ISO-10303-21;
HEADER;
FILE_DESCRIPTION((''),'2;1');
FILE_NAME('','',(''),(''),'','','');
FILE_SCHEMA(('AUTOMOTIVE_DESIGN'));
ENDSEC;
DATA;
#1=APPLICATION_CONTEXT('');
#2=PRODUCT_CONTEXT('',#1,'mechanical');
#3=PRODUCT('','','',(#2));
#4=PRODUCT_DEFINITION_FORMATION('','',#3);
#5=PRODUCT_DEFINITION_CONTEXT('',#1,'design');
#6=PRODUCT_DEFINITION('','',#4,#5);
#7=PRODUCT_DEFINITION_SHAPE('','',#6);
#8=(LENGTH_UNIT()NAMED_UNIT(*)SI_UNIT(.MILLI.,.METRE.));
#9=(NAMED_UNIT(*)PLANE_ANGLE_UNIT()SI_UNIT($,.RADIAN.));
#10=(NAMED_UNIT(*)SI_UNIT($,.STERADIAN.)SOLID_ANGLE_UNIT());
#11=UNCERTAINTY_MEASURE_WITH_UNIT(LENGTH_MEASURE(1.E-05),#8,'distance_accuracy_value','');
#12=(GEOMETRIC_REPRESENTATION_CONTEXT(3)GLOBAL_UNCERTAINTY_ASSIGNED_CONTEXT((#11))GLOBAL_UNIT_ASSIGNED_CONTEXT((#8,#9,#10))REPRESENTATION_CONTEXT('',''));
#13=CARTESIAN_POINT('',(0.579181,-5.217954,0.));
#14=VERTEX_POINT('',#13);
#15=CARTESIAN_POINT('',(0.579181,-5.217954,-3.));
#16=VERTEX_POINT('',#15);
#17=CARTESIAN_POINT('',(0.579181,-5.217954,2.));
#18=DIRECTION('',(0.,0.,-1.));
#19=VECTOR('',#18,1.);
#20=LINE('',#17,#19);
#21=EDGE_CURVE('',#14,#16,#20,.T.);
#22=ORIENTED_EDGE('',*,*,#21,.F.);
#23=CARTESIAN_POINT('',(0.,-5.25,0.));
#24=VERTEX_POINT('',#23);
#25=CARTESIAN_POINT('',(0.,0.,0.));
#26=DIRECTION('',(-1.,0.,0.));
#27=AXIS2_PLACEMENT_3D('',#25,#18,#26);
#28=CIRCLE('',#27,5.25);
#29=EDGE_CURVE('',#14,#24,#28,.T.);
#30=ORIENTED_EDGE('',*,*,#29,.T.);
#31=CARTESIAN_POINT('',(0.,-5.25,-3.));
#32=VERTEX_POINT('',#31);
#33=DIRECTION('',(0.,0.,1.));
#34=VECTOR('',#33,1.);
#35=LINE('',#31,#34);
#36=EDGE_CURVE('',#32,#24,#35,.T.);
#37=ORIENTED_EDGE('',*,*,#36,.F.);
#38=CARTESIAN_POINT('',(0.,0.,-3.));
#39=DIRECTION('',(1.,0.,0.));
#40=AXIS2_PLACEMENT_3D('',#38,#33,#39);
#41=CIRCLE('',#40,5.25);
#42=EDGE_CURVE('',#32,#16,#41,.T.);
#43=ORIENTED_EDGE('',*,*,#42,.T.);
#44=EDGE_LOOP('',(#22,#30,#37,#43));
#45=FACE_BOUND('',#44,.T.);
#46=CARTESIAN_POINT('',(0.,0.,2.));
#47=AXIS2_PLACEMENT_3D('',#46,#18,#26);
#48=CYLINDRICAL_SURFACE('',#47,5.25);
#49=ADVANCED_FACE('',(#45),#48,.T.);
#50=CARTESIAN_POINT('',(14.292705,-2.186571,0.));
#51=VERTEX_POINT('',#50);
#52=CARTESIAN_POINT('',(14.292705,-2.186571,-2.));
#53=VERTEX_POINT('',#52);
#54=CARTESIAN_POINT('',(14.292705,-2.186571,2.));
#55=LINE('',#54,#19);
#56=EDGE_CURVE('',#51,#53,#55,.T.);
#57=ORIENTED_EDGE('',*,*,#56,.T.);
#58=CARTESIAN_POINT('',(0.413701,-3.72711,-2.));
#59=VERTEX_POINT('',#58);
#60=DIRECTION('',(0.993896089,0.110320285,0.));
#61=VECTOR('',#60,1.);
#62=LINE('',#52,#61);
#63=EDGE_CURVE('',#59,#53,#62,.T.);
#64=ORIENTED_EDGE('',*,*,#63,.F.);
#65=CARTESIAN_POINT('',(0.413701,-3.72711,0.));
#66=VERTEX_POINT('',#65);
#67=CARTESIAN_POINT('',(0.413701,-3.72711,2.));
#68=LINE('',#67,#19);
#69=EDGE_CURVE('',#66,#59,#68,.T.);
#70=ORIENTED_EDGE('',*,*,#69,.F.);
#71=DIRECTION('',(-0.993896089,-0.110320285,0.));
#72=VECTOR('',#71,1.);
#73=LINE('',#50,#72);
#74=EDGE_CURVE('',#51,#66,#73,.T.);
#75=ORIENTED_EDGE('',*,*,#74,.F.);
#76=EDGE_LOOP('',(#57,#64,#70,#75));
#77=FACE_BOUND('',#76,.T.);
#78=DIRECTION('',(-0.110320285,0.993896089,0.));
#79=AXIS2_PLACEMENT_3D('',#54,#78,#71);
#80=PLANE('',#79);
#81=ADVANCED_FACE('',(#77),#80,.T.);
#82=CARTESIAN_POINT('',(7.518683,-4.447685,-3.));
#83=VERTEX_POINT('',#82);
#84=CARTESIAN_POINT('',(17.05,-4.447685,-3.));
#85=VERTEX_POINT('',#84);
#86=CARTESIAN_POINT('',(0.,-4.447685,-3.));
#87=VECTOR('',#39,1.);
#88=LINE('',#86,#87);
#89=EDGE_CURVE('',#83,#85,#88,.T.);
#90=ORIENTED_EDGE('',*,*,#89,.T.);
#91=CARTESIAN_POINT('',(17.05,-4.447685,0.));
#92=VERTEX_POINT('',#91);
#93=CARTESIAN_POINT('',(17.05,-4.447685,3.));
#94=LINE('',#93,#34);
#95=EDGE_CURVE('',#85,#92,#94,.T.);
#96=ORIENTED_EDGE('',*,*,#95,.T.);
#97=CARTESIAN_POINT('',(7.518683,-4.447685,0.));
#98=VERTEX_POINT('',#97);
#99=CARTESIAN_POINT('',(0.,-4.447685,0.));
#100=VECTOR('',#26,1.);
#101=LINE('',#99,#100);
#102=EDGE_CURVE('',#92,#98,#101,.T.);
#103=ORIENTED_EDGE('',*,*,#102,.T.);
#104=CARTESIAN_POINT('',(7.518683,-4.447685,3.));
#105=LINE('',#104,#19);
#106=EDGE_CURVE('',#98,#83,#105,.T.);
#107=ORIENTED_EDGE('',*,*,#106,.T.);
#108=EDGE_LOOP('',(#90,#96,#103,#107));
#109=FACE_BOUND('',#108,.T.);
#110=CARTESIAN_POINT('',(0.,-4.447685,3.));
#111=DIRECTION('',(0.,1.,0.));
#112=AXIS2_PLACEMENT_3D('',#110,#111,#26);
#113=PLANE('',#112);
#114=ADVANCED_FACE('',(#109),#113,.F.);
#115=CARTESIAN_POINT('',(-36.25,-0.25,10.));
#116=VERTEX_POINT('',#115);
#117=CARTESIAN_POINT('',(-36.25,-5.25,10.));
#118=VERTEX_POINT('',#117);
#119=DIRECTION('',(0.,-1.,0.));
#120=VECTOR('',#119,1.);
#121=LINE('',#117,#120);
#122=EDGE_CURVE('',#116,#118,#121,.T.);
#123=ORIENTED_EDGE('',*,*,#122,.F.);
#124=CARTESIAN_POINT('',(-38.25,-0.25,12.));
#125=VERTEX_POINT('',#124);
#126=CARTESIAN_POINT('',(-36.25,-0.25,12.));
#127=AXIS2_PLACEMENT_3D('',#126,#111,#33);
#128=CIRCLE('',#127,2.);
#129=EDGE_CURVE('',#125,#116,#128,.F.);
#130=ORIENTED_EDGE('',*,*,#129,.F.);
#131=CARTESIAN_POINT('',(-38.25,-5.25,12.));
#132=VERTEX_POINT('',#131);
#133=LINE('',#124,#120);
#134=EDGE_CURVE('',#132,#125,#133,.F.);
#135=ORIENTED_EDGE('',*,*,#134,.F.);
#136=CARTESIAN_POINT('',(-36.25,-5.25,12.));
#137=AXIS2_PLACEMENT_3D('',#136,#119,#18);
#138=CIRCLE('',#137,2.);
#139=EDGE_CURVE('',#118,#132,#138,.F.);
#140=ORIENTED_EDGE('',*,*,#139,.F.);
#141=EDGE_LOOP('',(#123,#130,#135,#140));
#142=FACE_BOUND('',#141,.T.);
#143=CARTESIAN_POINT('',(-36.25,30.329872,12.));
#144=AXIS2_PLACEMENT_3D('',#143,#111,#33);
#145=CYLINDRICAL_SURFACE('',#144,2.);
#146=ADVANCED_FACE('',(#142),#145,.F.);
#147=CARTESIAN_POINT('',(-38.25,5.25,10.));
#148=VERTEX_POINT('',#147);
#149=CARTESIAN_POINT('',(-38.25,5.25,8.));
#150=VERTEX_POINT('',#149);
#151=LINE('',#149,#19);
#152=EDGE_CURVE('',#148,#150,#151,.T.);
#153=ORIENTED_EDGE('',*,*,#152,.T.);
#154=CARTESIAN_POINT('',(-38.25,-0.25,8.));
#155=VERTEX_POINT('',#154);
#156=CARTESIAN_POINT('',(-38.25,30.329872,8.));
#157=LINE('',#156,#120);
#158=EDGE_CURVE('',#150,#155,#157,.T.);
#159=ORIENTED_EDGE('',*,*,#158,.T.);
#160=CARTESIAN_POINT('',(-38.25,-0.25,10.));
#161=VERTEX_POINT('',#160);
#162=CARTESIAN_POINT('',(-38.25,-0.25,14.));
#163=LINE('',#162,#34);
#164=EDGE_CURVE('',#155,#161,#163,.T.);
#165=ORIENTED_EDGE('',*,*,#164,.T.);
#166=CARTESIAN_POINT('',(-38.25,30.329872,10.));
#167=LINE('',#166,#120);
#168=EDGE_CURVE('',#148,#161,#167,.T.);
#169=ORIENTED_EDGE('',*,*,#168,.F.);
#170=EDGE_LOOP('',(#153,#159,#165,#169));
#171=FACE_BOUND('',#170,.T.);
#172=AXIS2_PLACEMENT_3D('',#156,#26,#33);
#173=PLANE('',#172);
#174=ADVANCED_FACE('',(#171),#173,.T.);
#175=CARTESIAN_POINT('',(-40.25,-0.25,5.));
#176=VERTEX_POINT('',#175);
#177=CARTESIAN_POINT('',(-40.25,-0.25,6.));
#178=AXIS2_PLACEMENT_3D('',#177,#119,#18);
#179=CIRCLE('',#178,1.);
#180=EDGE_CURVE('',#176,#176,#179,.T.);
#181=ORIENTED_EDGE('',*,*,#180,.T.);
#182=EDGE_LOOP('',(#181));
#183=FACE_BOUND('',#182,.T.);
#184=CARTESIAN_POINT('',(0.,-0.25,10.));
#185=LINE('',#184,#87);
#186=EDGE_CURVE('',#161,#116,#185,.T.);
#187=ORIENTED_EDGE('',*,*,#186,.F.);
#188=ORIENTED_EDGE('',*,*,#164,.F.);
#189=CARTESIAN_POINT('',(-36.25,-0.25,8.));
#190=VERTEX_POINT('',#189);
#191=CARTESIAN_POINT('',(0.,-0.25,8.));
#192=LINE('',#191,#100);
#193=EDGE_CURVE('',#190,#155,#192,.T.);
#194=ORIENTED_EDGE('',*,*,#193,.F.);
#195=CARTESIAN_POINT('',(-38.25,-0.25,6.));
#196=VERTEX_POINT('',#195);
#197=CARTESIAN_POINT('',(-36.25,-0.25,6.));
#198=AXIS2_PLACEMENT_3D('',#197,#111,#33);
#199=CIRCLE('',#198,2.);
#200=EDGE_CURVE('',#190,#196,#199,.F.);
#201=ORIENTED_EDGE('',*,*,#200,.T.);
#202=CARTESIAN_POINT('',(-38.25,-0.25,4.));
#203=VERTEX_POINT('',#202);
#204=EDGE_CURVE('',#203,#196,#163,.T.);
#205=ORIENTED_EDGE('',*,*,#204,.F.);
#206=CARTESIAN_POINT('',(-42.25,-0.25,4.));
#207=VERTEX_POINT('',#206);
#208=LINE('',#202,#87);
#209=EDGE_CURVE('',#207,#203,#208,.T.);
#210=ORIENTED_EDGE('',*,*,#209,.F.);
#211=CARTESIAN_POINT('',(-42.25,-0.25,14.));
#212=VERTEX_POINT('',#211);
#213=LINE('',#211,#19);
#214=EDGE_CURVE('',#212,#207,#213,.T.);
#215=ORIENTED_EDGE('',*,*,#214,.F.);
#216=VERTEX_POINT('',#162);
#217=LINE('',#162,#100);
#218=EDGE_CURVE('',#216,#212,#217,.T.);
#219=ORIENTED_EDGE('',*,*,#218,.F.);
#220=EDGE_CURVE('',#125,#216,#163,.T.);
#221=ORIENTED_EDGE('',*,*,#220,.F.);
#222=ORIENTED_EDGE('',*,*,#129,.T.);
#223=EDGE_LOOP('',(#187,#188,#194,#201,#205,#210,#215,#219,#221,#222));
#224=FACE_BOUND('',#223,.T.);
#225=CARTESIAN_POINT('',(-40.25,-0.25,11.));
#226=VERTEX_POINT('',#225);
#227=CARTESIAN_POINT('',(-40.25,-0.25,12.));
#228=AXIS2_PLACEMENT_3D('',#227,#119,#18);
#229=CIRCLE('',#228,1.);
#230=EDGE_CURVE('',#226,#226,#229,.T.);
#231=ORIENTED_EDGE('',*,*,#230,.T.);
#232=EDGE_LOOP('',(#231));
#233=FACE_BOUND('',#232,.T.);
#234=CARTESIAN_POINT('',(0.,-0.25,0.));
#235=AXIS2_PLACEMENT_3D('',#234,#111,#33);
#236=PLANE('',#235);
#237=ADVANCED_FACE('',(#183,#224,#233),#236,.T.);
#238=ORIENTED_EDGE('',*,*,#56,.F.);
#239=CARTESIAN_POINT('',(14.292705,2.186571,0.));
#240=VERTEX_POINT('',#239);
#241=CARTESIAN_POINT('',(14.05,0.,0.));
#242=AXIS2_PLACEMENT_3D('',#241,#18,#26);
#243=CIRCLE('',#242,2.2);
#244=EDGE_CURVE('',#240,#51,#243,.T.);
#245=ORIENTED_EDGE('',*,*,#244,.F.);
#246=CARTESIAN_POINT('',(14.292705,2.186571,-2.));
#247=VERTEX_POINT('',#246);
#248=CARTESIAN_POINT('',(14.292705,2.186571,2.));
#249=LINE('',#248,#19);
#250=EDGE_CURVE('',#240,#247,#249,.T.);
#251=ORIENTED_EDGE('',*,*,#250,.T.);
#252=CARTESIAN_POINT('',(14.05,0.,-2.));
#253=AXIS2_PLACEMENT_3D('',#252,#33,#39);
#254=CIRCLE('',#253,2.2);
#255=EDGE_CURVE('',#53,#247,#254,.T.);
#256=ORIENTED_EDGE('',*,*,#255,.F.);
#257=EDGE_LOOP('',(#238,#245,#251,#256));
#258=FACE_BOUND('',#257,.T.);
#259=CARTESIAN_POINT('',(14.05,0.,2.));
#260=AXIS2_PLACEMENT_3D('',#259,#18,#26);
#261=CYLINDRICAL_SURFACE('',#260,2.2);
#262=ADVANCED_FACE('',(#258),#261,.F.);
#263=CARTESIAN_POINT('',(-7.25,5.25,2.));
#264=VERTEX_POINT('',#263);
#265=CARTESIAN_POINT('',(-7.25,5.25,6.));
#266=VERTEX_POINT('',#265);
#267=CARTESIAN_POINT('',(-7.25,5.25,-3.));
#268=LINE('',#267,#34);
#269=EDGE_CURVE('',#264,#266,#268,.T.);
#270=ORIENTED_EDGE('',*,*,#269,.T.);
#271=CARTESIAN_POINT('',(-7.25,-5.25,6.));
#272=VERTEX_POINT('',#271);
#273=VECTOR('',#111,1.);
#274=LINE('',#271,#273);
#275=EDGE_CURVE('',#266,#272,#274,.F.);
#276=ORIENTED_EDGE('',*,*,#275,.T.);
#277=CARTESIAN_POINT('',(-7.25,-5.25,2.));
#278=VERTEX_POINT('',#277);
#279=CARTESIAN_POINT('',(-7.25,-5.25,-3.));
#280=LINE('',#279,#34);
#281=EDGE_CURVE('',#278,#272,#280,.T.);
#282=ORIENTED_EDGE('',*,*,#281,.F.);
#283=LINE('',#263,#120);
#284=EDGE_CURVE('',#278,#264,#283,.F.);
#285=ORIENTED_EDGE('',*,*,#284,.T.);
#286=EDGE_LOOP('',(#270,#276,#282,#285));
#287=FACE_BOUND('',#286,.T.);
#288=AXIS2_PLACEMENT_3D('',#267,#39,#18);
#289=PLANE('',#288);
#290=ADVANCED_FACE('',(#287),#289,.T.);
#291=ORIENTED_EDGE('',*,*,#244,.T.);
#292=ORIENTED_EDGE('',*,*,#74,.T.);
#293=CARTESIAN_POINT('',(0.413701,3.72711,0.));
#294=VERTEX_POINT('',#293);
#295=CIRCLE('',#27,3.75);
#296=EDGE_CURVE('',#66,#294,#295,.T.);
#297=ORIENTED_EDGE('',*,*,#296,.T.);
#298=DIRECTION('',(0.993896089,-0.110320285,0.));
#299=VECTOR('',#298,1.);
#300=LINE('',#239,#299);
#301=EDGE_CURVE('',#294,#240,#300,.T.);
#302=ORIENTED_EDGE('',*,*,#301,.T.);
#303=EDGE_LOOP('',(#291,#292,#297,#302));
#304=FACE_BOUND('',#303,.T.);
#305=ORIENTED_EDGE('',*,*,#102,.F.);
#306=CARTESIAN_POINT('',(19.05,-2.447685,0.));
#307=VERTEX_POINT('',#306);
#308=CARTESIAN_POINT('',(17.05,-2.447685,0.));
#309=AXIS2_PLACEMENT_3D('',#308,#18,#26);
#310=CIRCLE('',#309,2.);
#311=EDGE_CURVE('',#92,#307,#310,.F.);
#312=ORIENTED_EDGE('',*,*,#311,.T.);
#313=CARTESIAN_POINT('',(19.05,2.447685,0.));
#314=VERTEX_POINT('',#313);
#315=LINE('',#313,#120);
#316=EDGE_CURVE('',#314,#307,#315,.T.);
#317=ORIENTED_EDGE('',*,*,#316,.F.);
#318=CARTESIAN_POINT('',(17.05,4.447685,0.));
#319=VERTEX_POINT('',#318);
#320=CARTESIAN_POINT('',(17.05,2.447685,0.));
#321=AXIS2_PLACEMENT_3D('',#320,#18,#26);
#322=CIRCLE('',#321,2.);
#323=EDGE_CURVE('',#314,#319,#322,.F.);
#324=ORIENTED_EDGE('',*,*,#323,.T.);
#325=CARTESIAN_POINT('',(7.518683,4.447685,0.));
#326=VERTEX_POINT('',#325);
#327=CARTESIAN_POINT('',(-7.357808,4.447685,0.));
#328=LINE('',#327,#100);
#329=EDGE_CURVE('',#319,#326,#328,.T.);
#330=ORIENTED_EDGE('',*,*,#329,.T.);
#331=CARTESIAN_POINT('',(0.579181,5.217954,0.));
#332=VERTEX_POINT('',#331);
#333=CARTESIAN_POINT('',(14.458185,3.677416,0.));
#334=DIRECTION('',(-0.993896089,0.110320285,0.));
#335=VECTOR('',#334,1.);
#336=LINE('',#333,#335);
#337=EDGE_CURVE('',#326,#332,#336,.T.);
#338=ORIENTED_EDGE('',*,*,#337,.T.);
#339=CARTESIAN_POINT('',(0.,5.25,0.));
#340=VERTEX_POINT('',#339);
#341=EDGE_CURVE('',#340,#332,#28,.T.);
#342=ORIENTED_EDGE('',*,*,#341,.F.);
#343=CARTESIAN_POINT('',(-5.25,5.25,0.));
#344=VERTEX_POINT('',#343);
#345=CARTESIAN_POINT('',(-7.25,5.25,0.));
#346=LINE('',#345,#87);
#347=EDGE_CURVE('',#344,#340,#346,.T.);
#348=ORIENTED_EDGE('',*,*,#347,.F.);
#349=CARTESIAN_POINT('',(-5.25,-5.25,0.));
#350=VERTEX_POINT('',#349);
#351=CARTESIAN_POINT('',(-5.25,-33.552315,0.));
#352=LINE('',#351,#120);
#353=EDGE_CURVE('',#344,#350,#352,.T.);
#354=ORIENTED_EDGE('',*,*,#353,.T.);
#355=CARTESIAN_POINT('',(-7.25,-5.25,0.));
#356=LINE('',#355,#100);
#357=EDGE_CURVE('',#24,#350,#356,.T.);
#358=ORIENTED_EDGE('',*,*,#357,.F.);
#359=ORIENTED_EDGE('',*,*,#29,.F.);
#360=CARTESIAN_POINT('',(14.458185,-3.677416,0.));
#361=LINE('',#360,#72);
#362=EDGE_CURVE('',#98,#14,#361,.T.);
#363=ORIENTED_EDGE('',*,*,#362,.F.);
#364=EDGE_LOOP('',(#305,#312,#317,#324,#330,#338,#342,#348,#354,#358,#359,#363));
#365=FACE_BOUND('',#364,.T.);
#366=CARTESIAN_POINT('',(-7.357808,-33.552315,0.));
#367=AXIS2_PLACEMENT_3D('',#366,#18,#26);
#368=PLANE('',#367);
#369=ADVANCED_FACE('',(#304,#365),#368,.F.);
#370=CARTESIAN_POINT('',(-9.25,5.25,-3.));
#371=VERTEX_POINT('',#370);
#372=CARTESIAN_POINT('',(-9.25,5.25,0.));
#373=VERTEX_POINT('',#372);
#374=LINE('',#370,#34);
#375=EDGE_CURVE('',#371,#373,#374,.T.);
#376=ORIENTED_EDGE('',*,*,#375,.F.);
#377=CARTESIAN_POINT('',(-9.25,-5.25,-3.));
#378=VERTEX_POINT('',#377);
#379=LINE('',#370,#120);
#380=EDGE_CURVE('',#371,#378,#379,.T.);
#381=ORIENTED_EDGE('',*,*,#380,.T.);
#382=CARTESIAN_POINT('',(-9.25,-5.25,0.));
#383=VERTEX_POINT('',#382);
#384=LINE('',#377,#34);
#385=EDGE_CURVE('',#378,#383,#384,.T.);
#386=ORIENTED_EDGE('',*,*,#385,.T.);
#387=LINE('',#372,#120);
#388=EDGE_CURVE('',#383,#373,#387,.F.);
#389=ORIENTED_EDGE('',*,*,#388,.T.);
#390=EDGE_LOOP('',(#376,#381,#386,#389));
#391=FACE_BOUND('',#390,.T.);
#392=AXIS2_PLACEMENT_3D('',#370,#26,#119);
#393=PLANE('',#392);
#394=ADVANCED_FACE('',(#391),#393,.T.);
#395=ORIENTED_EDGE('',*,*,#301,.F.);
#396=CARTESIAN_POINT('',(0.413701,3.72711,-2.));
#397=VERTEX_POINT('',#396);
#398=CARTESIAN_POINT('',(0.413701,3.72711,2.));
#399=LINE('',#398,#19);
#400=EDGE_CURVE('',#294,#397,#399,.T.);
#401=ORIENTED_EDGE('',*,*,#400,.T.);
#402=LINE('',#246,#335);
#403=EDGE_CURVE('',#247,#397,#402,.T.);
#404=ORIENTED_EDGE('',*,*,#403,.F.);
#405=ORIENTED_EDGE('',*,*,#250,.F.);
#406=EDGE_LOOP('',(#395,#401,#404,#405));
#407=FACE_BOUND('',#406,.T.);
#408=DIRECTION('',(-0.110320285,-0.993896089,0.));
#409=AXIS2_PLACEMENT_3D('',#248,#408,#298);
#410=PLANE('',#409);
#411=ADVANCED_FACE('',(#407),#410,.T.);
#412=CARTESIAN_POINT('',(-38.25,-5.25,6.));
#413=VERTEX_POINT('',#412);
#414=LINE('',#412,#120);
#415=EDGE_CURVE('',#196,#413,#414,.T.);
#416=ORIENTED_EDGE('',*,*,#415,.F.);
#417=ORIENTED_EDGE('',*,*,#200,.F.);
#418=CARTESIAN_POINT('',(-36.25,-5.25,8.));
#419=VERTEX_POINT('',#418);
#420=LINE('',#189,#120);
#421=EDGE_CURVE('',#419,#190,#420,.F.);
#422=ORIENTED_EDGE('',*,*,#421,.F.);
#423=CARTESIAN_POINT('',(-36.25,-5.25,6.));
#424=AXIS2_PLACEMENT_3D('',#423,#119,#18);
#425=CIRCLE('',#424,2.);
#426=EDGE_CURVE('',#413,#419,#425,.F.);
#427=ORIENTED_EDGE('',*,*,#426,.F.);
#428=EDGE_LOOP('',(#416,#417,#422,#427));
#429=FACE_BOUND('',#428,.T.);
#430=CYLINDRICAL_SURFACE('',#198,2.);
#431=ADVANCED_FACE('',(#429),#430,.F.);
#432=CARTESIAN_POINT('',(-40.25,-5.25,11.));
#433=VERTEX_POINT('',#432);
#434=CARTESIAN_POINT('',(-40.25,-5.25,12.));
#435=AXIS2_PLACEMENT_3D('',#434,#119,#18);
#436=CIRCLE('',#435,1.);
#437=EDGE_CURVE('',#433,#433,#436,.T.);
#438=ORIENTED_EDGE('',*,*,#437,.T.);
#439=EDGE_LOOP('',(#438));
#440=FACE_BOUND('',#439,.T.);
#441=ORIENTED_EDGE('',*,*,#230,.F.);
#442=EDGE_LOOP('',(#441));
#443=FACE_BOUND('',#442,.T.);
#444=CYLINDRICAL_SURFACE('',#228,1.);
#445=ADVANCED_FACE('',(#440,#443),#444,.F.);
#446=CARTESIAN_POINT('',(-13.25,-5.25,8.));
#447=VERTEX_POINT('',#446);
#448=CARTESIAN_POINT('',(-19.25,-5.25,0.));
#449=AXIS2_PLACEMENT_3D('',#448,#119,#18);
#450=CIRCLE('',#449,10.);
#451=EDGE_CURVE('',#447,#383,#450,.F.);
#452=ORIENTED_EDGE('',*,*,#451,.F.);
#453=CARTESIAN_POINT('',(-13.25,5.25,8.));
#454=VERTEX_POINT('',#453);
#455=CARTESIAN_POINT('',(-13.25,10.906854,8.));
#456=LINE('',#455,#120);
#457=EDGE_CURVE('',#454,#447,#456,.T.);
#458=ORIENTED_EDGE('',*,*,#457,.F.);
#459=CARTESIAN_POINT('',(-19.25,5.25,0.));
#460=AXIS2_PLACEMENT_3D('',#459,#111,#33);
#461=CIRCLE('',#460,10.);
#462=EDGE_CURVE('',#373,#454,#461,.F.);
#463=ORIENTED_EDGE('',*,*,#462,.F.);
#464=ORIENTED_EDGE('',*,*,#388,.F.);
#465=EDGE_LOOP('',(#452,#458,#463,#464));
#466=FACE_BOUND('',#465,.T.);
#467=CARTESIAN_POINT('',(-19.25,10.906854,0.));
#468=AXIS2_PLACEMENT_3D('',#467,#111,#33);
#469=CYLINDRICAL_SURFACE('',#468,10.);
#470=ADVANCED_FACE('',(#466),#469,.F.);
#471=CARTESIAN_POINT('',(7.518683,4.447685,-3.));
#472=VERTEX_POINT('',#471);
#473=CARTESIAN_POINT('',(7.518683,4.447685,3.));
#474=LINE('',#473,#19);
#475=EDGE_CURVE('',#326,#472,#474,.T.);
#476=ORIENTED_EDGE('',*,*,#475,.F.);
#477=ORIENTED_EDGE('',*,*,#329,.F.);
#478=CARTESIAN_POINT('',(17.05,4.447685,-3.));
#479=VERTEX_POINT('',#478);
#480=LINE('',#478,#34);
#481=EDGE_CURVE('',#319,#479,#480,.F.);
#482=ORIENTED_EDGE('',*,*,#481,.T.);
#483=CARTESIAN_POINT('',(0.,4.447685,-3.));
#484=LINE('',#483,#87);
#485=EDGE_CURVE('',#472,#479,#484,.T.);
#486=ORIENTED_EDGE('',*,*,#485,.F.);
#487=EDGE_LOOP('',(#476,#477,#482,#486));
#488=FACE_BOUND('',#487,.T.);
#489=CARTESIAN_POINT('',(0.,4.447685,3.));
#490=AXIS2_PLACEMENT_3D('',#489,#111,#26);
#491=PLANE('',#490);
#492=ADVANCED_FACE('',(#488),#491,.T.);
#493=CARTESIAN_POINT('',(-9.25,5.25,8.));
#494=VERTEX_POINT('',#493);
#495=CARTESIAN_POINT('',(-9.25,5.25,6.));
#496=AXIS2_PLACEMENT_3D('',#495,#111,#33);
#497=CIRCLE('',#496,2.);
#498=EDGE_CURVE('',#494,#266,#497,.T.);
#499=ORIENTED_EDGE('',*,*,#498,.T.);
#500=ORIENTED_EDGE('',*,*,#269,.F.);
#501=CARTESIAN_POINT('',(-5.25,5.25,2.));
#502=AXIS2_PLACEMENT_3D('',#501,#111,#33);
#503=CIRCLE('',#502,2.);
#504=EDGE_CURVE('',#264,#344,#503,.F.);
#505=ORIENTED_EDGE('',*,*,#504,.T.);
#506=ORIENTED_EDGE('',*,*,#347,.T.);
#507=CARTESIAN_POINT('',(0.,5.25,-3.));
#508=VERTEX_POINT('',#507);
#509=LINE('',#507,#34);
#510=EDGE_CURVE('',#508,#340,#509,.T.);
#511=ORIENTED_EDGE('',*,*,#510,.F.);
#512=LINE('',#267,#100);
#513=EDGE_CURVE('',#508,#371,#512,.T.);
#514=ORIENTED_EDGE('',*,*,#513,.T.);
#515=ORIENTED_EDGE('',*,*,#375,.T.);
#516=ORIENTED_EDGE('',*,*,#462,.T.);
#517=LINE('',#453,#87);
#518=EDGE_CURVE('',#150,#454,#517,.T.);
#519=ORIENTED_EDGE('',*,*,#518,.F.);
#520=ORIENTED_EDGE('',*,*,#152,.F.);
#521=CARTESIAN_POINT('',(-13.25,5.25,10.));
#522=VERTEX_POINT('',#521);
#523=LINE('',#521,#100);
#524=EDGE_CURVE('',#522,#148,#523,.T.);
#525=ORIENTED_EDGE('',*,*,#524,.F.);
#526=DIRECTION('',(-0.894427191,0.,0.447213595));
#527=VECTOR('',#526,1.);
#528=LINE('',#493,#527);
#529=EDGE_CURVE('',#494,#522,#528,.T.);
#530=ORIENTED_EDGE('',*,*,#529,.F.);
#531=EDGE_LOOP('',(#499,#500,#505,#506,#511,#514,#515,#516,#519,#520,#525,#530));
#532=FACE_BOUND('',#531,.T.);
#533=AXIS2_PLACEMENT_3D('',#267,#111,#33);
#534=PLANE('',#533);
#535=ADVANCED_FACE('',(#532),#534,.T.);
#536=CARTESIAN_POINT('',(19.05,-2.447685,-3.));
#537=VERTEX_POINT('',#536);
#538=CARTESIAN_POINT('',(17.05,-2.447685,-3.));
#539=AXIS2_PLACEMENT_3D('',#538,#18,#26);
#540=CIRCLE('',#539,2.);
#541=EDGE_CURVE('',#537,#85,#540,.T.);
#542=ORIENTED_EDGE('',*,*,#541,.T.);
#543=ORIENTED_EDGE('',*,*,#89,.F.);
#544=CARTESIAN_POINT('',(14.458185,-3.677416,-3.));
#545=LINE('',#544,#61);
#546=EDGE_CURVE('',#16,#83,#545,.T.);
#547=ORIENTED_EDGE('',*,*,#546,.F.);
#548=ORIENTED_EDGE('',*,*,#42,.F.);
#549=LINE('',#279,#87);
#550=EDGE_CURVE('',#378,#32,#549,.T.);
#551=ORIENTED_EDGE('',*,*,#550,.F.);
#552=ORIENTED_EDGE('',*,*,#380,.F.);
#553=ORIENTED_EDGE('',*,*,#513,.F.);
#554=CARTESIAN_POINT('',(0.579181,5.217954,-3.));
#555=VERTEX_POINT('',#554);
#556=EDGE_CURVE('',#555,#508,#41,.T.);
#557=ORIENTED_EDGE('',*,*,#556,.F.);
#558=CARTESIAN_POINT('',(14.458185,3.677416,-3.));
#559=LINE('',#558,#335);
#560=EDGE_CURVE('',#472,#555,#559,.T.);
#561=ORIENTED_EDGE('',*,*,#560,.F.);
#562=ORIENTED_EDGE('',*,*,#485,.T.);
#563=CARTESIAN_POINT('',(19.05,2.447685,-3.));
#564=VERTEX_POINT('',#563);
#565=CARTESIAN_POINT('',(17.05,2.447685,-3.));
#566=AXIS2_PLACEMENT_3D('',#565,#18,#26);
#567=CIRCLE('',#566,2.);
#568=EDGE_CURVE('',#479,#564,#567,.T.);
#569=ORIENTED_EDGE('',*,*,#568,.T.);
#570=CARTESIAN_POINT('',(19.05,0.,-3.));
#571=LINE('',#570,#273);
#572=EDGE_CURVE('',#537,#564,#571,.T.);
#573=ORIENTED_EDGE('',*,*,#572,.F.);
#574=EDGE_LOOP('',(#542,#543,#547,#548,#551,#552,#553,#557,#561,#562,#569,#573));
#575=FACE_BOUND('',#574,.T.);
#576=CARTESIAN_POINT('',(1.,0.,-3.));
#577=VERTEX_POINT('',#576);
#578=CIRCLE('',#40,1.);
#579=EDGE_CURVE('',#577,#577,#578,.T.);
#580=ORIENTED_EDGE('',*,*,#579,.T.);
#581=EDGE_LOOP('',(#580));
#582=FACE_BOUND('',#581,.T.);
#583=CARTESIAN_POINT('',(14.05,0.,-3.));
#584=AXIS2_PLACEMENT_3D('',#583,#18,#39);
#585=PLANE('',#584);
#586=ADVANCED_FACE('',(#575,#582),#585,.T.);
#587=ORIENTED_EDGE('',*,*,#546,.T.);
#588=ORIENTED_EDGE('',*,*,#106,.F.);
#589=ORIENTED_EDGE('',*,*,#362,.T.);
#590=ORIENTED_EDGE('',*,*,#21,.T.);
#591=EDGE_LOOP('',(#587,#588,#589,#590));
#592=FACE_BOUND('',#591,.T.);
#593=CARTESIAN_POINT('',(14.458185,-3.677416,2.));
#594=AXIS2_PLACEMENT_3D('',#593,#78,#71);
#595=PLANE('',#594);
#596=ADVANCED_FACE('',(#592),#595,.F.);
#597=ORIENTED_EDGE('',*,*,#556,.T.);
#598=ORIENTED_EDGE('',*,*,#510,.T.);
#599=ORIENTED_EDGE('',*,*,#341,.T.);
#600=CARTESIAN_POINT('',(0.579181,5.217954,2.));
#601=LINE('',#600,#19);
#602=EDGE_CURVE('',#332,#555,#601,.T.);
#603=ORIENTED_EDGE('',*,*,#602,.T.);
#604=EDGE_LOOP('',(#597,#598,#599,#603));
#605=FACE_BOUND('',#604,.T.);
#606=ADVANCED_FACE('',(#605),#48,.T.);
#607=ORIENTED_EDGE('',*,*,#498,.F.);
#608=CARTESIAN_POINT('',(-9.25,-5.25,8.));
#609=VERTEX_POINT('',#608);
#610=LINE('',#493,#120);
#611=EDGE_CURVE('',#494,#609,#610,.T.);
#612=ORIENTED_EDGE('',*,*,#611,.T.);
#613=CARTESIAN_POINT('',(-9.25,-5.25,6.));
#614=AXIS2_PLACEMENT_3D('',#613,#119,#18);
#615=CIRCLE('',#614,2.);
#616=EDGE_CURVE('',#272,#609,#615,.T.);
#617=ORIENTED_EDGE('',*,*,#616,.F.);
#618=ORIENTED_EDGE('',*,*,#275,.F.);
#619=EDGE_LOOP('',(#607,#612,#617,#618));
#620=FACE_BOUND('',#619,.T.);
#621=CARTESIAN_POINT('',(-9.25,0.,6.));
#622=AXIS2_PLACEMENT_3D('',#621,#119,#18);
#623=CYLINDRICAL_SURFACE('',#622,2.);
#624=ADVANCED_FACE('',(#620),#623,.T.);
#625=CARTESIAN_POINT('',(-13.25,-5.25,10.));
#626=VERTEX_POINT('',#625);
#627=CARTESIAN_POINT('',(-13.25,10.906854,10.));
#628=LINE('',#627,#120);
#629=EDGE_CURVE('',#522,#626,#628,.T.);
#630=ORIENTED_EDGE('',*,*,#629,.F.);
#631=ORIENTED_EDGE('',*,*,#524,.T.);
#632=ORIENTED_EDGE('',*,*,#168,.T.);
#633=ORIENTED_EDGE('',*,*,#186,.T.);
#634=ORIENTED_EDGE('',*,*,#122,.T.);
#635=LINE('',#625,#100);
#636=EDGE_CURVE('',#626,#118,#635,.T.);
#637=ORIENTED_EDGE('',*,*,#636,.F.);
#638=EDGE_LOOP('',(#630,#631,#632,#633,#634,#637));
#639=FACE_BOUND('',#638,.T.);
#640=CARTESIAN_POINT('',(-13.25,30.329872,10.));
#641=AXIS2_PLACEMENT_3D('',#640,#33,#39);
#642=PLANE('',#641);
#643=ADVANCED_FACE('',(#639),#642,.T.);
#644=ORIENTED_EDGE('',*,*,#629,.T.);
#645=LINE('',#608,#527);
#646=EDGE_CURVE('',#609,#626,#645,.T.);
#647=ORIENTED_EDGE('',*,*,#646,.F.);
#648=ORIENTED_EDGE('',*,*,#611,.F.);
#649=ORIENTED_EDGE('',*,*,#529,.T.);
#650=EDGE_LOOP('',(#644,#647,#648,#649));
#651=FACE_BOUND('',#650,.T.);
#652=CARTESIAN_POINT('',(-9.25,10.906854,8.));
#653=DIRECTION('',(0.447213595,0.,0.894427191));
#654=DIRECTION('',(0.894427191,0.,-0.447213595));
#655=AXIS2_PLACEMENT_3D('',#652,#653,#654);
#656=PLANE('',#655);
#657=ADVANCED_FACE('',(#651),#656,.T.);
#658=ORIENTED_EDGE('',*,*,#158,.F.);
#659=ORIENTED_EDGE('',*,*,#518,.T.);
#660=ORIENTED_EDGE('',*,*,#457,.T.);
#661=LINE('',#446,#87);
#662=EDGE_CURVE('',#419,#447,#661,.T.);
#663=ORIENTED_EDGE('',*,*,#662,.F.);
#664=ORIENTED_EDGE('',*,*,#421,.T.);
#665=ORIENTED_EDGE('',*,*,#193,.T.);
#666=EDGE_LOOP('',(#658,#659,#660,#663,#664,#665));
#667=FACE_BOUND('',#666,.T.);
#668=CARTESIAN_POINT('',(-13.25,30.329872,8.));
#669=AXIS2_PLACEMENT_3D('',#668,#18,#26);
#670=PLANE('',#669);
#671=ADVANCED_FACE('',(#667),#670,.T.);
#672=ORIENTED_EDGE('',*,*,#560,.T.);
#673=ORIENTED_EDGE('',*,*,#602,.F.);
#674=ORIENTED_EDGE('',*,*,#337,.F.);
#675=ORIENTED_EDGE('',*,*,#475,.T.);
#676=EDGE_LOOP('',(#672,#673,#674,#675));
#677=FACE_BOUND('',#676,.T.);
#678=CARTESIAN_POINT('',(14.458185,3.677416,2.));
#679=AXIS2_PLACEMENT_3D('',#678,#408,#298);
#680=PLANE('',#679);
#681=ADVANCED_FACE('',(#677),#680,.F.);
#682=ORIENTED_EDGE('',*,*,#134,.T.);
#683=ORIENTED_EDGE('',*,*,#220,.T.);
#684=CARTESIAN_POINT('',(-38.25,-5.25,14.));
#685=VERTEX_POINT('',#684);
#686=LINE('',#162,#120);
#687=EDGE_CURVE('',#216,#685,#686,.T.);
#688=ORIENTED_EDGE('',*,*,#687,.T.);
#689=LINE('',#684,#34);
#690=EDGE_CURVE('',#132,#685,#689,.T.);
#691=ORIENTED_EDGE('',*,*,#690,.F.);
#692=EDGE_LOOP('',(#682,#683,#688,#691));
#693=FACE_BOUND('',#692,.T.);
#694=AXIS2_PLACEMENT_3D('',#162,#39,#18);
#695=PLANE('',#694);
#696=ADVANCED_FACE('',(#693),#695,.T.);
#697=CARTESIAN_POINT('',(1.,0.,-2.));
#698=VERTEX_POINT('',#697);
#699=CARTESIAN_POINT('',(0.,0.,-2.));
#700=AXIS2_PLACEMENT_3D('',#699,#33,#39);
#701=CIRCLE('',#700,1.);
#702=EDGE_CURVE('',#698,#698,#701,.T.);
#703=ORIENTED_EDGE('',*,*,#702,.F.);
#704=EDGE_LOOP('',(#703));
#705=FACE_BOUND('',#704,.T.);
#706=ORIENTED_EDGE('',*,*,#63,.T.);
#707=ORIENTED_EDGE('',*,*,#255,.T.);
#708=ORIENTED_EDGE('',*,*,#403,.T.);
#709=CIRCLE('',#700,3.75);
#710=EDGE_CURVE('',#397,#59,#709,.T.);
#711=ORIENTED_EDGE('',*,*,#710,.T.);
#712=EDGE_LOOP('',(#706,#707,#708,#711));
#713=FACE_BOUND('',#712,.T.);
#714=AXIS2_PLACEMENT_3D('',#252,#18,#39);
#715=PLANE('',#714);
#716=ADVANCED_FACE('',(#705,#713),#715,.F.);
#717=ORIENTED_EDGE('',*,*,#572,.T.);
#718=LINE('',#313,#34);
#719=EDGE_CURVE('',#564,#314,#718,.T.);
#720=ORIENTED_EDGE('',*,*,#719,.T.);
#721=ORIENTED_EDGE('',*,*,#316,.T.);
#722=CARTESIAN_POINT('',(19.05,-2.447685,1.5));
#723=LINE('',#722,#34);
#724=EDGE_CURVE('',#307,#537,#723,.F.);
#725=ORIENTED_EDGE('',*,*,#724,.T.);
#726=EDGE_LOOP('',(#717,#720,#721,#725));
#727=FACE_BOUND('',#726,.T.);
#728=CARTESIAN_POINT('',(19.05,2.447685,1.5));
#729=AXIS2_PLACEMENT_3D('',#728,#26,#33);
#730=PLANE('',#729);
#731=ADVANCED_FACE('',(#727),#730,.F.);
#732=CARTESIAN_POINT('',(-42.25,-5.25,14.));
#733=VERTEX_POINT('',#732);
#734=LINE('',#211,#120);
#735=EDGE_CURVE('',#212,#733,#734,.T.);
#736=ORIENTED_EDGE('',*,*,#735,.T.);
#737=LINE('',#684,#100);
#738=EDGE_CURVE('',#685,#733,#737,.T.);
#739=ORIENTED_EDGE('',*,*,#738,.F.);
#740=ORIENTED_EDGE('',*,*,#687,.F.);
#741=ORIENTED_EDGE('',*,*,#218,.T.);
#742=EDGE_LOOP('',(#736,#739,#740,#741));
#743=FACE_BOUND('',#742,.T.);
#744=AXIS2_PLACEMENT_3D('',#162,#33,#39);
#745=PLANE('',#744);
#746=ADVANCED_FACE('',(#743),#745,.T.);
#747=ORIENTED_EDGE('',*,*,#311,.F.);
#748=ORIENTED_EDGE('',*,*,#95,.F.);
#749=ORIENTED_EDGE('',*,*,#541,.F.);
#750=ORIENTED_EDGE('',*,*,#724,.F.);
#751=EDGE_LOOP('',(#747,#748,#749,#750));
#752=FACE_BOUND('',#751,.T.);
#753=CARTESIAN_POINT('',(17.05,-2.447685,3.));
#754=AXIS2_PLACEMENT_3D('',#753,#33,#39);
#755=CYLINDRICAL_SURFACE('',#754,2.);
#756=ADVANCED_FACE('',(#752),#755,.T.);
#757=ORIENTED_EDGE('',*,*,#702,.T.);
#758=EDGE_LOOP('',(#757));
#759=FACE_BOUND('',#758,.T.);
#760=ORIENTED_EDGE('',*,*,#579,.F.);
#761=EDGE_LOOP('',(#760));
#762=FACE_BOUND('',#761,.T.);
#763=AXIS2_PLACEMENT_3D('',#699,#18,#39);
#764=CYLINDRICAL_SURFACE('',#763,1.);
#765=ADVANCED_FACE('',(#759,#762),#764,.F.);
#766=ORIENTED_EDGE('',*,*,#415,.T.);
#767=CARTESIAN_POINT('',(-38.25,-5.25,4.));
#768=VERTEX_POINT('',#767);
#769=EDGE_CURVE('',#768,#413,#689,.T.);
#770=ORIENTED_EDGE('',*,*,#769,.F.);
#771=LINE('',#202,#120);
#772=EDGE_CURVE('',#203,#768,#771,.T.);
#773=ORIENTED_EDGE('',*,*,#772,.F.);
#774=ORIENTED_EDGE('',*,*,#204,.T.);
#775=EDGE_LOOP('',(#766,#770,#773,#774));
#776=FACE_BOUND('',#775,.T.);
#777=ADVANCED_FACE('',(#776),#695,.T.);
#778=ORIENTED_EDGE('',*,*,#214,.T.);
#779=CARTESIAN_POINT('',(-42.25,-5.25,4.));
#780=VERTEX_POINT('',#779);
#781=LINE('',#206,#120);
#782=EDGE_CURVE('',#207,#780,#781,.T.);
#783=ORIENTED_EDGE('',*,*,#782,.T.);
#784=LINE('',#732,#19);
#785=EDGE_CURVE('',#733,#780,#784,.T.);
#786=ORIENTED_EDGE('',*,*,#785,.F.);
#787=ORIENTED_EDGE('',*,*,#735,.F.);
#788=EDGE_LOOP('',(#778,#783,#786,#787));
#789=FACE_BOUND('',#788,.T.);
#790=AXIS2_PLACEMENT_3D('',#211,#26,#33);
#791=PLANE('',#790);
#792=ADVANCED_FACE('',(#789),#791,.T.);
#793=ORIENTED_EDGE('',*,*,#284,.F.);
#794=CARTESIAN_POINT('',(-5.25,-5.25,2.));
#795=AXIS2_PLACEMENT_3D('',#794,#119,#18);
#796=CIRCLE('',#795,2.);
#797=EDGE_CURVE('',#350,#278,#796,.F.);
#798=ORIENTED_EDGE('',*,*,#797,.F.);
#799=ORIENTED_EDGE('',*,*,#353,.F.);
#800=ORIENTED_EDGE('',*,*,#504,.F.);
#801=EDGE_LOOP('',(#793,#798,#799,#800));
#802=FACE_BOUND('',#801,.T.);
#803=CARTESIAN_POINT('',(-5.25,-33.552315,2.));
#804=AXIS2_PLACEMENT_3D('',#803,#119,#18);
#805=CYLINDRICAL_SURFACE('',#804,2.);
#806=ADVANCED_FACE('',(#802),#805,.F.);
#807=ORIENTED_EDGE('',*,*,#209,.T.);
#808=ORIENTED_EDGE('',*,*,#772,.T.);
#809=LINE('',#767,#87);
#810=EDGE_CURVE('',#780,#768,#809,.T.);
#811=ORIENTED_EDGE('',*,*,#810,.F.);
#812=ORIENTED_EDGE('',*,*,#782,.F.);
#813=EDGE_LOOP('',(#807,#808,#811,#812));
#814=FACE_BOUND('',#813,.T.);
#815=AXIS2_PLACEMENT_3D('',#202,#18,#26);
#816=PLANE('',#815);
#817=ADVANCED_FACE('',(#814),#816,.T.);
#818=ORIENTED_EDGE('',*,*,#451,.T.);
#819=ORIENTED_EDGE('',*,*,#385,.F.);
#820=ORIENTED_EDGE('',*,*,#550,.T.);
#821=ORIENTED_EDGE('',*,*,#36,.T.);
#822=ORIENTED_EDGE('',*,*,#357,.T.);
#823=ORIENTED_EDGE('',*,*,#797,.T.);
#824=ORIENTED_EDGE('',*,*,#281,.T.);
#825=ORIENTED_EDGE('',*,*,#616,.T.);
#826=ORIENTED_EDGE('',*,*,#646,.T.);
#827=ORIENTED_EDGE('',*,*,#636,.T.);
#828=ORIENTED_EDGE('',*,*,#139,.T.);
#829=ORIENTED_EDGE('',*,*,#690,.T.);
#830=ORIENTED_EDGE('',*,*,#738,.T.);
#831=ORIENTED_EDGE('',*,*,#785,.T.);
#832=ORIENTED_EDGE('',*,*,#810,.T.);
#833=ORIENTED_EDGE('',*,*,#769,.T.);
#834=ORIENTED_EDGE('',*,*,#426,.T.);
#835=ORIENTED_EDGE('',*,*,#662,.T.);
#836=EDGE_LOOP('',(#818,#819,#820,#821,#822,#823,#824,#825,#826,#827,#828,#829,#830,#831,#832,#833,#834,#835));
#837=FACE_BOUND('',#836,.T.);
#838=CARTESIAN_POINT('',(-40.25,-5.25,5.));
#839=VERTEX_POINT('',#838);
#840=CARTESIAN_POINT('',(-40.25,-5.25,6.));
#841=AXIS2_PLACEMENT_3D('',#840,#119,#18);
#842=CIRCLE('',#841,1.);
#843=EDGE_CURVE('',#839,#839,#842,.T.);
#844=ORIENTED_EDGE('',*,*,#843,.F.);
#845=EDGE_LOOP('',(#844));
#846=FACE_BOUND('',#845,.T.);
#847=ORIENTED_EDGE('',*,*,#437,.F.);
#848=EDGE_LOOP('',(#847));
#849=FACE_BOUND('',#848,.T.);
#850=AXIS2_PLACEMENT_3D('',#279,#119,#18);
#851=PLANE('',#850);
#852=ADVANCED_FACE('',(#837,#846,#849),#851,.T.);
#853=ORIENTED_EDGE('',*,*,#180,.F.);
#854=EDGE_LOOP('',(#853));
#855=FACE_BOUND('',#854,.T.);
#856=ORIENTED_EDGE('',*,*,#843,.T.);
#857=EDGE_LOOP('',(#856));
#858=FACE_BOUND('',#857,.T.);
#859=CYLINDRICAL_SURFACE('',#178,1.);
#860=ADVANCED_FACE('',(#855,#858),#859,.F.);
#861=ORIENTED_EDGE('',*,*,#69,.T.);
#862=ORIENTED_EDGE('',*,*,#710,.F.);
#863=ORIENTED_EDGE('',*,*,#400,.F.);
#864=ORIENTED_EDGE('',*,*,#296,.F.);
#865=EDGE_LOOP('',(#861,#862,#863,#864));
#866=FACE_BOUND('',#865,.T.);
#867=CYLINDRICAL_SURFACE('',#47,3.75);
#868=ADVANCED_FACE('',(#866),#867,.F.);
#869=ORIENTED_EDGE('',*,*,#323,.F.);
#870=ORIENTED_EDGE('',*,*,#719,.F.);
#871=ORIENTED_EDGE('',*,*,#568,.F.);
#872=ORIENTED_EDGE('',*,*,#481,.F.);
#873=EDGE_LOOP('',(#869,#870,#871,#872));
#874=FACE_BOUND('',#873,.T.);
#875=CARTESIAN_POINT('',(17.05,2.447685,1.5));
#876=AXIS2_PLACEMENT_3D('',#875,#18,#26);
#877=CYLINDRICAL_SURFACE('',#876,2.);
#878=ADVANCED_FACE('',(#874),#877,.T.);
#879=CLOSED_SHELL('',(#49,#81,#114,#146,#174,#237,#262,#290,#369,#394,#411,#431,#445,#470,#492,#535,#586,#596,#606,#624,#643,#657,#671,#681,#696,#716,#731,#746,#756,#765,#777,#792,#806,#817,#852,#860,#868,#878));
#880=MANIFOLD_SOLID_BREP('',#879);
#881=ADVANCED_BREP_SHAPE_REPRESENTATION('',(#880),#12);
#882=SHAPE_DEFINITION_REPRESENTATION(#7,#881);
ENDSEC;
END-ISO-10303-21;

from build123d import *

# Parameters (mm, degrees)
BOSS_EXTRUDE1_DEPTH      = 2
BOSS_EXTRUDE2_DEPTH      = 1
SKETCH3_R                = 1
CUT_EXTRUDE1_DEPTH       = 1
BOSS_EXTRUDE3_DEPTH      = 2
BOSS_EXTRUDE3_DEPTH_BACK = 1
BOSS_EXTRUDE4_START      = -3
BOSS_EXTRUDE4_OUTLINE_R  = 1
BOSS_EXTRUDE4_DEPTH      = 3
SKETCH6_R                = 3.500627768
BOSS_EXTRUDE5_DEPTH      = 3
BOSS_EXTRUDE6_DEPTH      = 3
CUT_EXTRUDE2_DEPTH       = 15
FILLET1_R                = 20
FILLET2_R                = 3
FILLET3_R                = 3
SKETCH9_R                = 1
CUT_EXTRUDE3_DEPTH       = 15
CUT_EXTRUDE4_DEPTH       = 1.5
FILLET4_R                = 8
FILLET5_R                = 2
SKETCH11_W               = 110.258684369
SKETCH11_H               = 6.064888907
CUT_EXTRUDE5_DEPTH       = 38
SKETCH12_R               = 18.613151801
CUT_EXTRUDE6_DEPTH       = 29
SKETCH13_W               = 77.706478895
SKETCH13_H               = 41.021519778
CUT_EXTRUDE7_DEPTH       = 1
FILLET6_START            = -4.447684996
FILLET6_DEPTH            = 2
FILLET6_START_2          = 2.447684996
FILLET6_2_DEPTH          = 2
FILLET6_START_3          = -1
FILLET6_3_DEPTH          = 1
FILLET6_START_4          = -2.447684996
FILLET6_4_DEPTH          = 4.895369992
CUT_EXTRUDE8_DEPTH       = 37
CUT_EXTRUDE8_DEPTH_BACK  = 10
SKETCH14_W               = 81.474605317
SKETCH14_H               = 77.503756956
BOSS_EXTRUDE7_DEPTH      = 2
BOSS_EXTRUDE7_DEPTH_BACK = 1
BOSS_EXTRUDE8_DEPTH      = 8
BOSS_EXTRUDE8_DEPTH_BACK = 3
SKETCH16_W               = 2
SKETCH16_H               = 10.5
BOSS_EXTRUDE9_DEPTH      = 10.5
FILLET7_R                = 10
SKETCH18_W               = 1.521986252
SKETCH18_H               = 3
BOSS_EXTRUDE10_DEPTH     = 10.5
FILLET8_R                = 2
SKETCH19_W               = 25
SKETCH19_H               = 2
BOSS_EXTRUDE11_DEPTH     = 10.5
SKETCH20_W               = 4
SKETCH20_H               = 10
SKETCH20_R               = 1
BOSS_EXTRUDE12_DEPTH     = 5
FILLET9_R                = 2
FILLET10_R               = 2
FILLET11_R               = 2


with BuildPart() as part:
    # Sketch1 → Boss-Extrude1 (new body)
    with BuildSketch(Plane.XY):
        with BuildLine():
            Line((14.458185053, 3.677415528), (0.579181495, 5.217954465))
            ThreePointArc((0.579181495, 5.217954465), (-5.25, 0), (0.579181495, -5.217954465))
            Line((0.579181495, -5.217954465), (14.458185053, -3.677415528))
            ThreePointArc((14.458185053, -3.677415528), (17.75, 0), (14.458185053, 3.677415528))
        make_face()
        with BuildLine():
            Line((14.292704626, 2.186571395), (0.413701068, 3.727110332))
            ThreePointArc((0.413701068, 3.727110332), (-3.75, 0), (0.413701068, -3.727110332))
            Line((0.413701068, -3.727110332), (14.292704626, -2.186571395))
            ThreePointArc((14.292704626, -2.186571395), (16.25, 0), (14.292704626, 2.186571395))
        make_face(mode=Mode.SUBTRACT)
    extrude(amount=BOSS_EXTRUDE1_DEPTH)

    # Sketch2 → Boss-Extrude2 (add)
    with BuildSketch(Plane.XY.offset(2)):
        with BuildLine():
            Line((14.458185053, 3.677415528), (0.579181495, 5.217954465))
            ThreePointArc((0.579181495, 5.217954465), (-5.25, 0), (0.579181495, -5.217954465))
            Line((0.579181495, -5.217954465), (14.458185053, -3.677415528))
            ThreePointArc((14.458185053, -3.677415528), (17.75, 0), (14.458185053, 3.677415528))
        make_face()
    extrude(amount=BOSS_EXTRUDE2_DEPTH)

    # Sketch3 → Cut-Extrude1 (cut)
    with BuildSketch(Plane.XY.offset(3)):
        Circle(SKETCH3_R)
    extrude(amount=-CUT_EXTRUDE1_DEPTH, mode=Mode.SUBTRACT)

    # Sketch4 → Boss-Extrude3 (add, two sides: drawn at the far end of the back side and taken through both)
    with BuildSketch(Plane(origin=(0, 0, 2), x_dir=(-1, 0, 0), z_dir=(0, 0, -1)).offset(-BOSS_EXTRUDE3_DEPTH_BACK)):
        with BuildLine():
            Line((-15.26072202, 2.426182253), (-7.518683274, 4.447684996))
            Line((-7.518683274, 4.447684996), (-42.518683274, 4.447684996))
            ThreePointArc((-42.518683274, 4.447684996), (-39.373695053, 3.144988221), (-38.070998278, 0))
            ThreePointArc((-38.070998278, 0), (-39.373695053, -3.144988221), (-42.518683274, -4.447684996))
            Line((-42.518683274, -4.447684996), (-7.518683274, -4.447684996))
            Line((-7.518683274, -4.447684996), (-13.862339481, -2.595687971))
            Line((-13.862339481, -2.595687971), (-16.213670101, -1.84565397))
            Line((-16.213670101, -1.84565397), (-17.166618181, 0))
            Line((-17.166618181, 0), (-15.26072202, 2.426182253))
        make_face()
        with BuildLine():
            ThreePointArc((-38.070998278, 0), (-39.373695053, 3.144988221), (-42.518683274, 4.447684996))
            Line((-42.518683274, 4.447684996), (-42.518683274, 2))
            ThreePointArc((-42.518683274, 2), (-41.104469712, 1.414213562), (-40.518683274, 0))
            ThreePointArc((-40.518683274, 0), (-41.104469712, -1.414213562), (-42.518683274, -2))
            Line((-42.518683274, -2), (-42.518683274, -4.447684996))
            ThreePointArc((-42.518683274, -4.447684996), (-39.373695053, -3.144988221), (-38.070998278, 0))
        make_face()
        with BuildLine():
            Line((-42.518683274, 2), (-42.518683274, 4.447684996))
            ThreePointArc((-42.518683274, 4.447684996), (-46.96636827, 0), (-42.518683274, -4.447684996))
            Line((-42.518683274, -4.447684996), (-42.518683274, -2))
            ThreePointArc((-42.518683274, -2), (-44.518683274, 0), (-42.518683274, 2))
        make_face()
    extrude(amount=BOSS_EXTRUDE3_DEPTH + BOSS_EXTRUDE3_DEPTH_BACK)

    # Boss-Extrude4: read off the stored shape, not the designer's step
    # Boss-Extrude4 outline → Boss-Extrude4 (add)
    with BuildSketch(Plane(origin=(0, 0, 0), x_dir=(-1, 0, 0), z_dir=(0, 0, -1)).offset(BOSS_EXTRUDE4_START)):
        with BuildLine():
            ThreePointArc((-42.518683274, -4.447684996), (-46.96636827, 0), (-42.518683274, 4.447684996))
            Line((-42.518683274, 4.447684996), (-54.290526798, 4.447684996))
            ThreePointArc((-54.290526798, 4.447684996), (-59.289068337, 5.305033813), (-63.716210719, 7.779073998))
            ThreePointArc((-63.716210719, 7.779073998), (-80, 0), (-63.716210719, -7.779073998))
            ThreePointArc((-63.716210719, -7.779073998), (-59.289068337, -5.305033813), (-54.290526798, -4.447684996))
            Line((-54.290526798, -4.447684996), (-42.518683274, -4.447684996))
        make_face()
        with Locations((-68.205771366, -4.5)):
            Circle(BOSS_EXTRUDE4_OUTLINE_R, mode=Mode.SUBTRACT)
        with Locations((-76, 0)):
            Circle(BOSS_EXTRUDE4_OUTLINE_R, mode=Mode.SUBTRACT)
        with Locations((-68.205771366, 4.5)):
            Circle(BOSS_EXTRUDE4_OUTLINE_R, mode=Mode.SUBTRACT)
    extrude(amount=BOSS_EXTRUDE4_DEPTH)

    # Sketch6 → Boss-Extrude5 (add)
    with BuildSketch(Plane(origin=(0, 0, 0), x_dir=(-1, 0, 0), z_dir=(0, 0, -1))):
        with Locations((-42.518683274, 0)):
            Circle(SKETCH6_R)
    extrude(amount=-BOSS_EXTRUDE5_DEPTH)

    # Sketch7 → Boss-Extrude6 (add)
    with BuildSketch(Plane(origin=(0, 0, 0), x_dir=(-1, 0, 0), z_dir=(0, 0, -1))):
        Polygon((-54.290526798, 4.447684996), (-94.290526798, 4.447684996), (-94.290526798, -3.552315004), (-68.73970048, -3.552315004), (-92.931542949, -17.519481766), (-88.931542949, -24.447684996), (-54.290526798, -4.447684996), align=None)
    extrude(amount=-BOSS_EXTRUDE6_DEPTH)

    # Sketch8 → Cut-Extrude2 (cut)
    with BuildSketch(Plane(origin=(0, 0, 0), x_dir=(-1, 0, 0), z_dir=(0, 0, -1))):
        Polygon((-94.290526798, 4.447684996), (-45.837456427, 4.447684996), (-68.326886593, 15.265325323), align=None)
        Polygon((-94.290526798, -3.552315004), (-68.73970048, -3.552315004), (-92.931542949, -17.519481766), align=None)
    extrude(amount=-CUT_EXTRUDE2_DEPTH, mode=Mode.SUBTRACT)

    # Fillet1
    fillet1_edges = [part.edges().sort_by_distance(p)[0] for p in [
        (54.290526798, -4.447684996, 1.5),
    ]]
    fillet(fillet1_edges, radius=FILLET1_R)

    # Fillet2
    fillet2_edges = [part.edges().sort_by_distance(p)[0] for p in [
        (94.290526798, 4.447684996, 1.5),
        (94.290526798, -3.552315004, 1.5),
        (92.931542949, -17.519481766, 1.5),
        (88.931542949, -24.447684996, 1.5),
    ]]
    fillet(fillet2_edges, radius=FILLET2_R)

    # Fillet3
    fillet3_edges = [part.edges().sort_by_distance(p)[0] for p in [
        (68.73970048, -3.552315004, 1.5),
    ]]
    fillet(fillet3_edges, radius=FILLET3_R)

    # Sketch9 → Cut-Extrude3 (cut)
    with BuildSketch(Plane(origin=(0, 0, 0), x_dir=(-1, 0, 0), z_dir=(0, 0, -1))):
        with Locations((-89.290526798, 0.447684996)):
            Circle(SKETCH9_R)
        with Locations((-79.290526798, 0.447684996)):
            Circle(SKETCH9_R)
        with Locations((-77.941161892, -13.483583381)):
            Circle(SKETCH9_R)
        with Locations((-86.60141593, -18.483583381)):
            Circle(SKETCH9_R)
    extrude(amount=-CUT_EXTRUDE3_DEPTH, mode=Mode.SUBTRACT)

    # Sketch10 → Cut-Extrude4 (cut)
    with BuildSketch(Plane(origin=(0, 0, 0), x_dir=(-1, 0, 0), z_dir=(0, 0, -1))):
        with BuildLine():
            Line((-19.05, 2.447684996), (-67.154630008, 2.447684996))
            ThreePointArc((-67.154630008, 2.447684996), (-70.616179326, -5.909234314), (-62.259260015, -2.447684996))
            Line((-62.259260015, -2.447684996), (-19.05, -2.447684996))
            Line((-19.05, -2.447684996), (-19.05, 2.447684996))
        make_face()
    extrude(amount=-CUT_EXTRUDE4_DEPTH, mode=Mode.SUBTRACT)

    # Fillet4
    fillet4_edges = [part.edges().sort_by_distance(p)[0] for p in [
        (62.259260015, -2.447684996, 0.75),
    ]]
    fillet(fillet4_edges, radius=FILLET4_R)

    # Fillet5
    fillet5_edges = [part.edges().sort_by_distance(p)[0] for p in [
        (19.05, 2.447684996, 0.75),
        (19.05, -2.447684996, 0.75),
    ]]
    fillet(fillet5_edges, radius=FILLET5_R)

    # Mirror1: part across plane


with BuildPart() as part_1:
    add(part.part)
    add(part.part.mirror(Plane(origin=(14.05, 0, 0), x_dir=(1, 0, 0), z_dir=(0, 0, 1))))

    # Sketch11 → Cut-Extrude5 (cut)
    with BuildSketch(Plane(origin=(0, 4.447684996, 0), x_dir=(1, 0, 0), z_dir=(0, 1, 0))):
        with Locations((47.771534573, -3.032444454)):
            Rectangle(SKETCH11_W, SKETCH11_H)
    extrude(amount=-CUT_EXTRUDE5_DEPTH, mode=Mode.SUBTRACT)

    # Sketch12 → Cut-Extrude6 (cut)
    with BuildSketch(Plane.XY):
        with Locations((7.534351793, 3.599902348)):
            Circle(SKETCH12_R)
    extrude(amount=CUT_EXTRUDE6_DEPTH, mode=Mode.SUBTRACT)

    # Sketch13 → Cut-Extrude7 (cut)
    with BuildSketch(Plane.XY):
        with Locations((57.903239447, -8.718962854)):
            Rectangle(SKETCH13_W, SKETCH13_H)
    extrude(amount=-CUT_EXTRUDE7_DEPTH, mode=Mode.SUBTRACT)

    # Fillet6: read off the stored shape, not the designer's step
    # Fillet6 outline → Fillet6 (add)
    with BuildSketch(Plane(origin=(0, 0, 0), x_dir=(1, 0, 0), z_dir=(0, 1, 0)).offset(FILLET6_START)):
        with BuildLine():
            Line((19.05, 1), (19.049997006, -1.45e-06))
            ThreePointArc((19.049997006, -1.45e-06), (21.172829345, 0.746793973), (23.408898944, 1))
            Line((23.408898944, 1), (19.05, 1))
        make_face()
    extrude(amount=FILLET6_DEPTH)

    # Fillet6 2 outline → Fillet6 2 (add)
    with BuildSketch(Plane(origin=(0, 0, 0), x_dir=(1, 0, 0), z_dir=(0, 1, 0)).offset(FILLET6_START_2)):
        with BuildLine():
            Line((19.05, 1), (19.049997006, -1.45e-06))
            ThreePointArc((19.049997006, -1.45e-06), (21.172829345, 0.746793973), (23.408898944, 1))
            Line((23.408898944, 1), (19.05, 1))
        make_face()
    extrude(amount=FILLET6_2_DEPTH)

    # Fillet6 3 outline → Fillet6 3 (add)
    with BuildSketch(Plane.XY.offset(FILLET6_START_3)):
        with BuildLine():
            Line((19.05, 2.447684996), (19.05, 0.447684996))
            ThreePointArc((19.05, 0.447684996), (19.635786438, 1.861898559), (21.05, 2.447684996))
            Line((21.05, 2.447684996), (19.05, 2.447684996))
        make_face()
        with BuildLine():
            ThreePointArc((21.05, -2.447684996), (19.635786438, -1.861898559), (19.05, -0.447684996))
            Line((19.05, -0.447684996), (19.05, -2.447684996))
            Line((19.05, -2.447684996), (21.05, -2.447684996))
        make_face()
    extrude(amount=FILLET6_3_DEPTH)

    # Fillet6 4 outline → Fillet6 4 (cut)
    with BuildSketch(Plane(origin=(0, 0, 0), x_dir=(1, 0, 0), z_dir=(0, 1, 0)).offset(FILLET6_START_4)):
        with BuildLine():
            ThreePointArc((23, 0.991636585), (20.973982557, 0.699029961), (19.049997006, -1.45e-06))
            Line((19.049997006, -1.45e-06), (18, -0.508538641))
            Line((18, -0.508538641), (18, -1))
            Line((18, -1), (23, -1))
            Line((23, -1), (23, 0.991636585))
        make_face()
    extrude(amount=FILLET6_4_DEPTH, mode=Mode.SUBTRACT)

    # Sketch14 → Cut-Extrude8 (cut, two sides: drawn at the far end of the back side and taken through both)
    with BuildSketch(Plane.XY.offset(-2).offset(-CUT_EXTRUDE8_DEPTH_BACK)):
        with Locations((59.787302659, 4.447684996)):
            Rectangle(SKETCH14_W, SKETCH14_H)
    extrude(amount=CUT_EXTRUDE8_DEPTH + CUT_EXTRUDE8_DEPTH_BACK, mode=Mode.SUBTRACT)

    # Sketch15 → Boss-Extrude7 (add, two sides: drawn at the far end of the back side and taken through both)
    with BuildSketch(Plane.XY.offset(-2).offset(-BOSS_EXTRUDE7_DEPTH_BACK)):
        Polygon((0, 4.349044766), (-3.638836396, 3.035019198), (-4.3304288, -1.298959868), (-2.356179656, -4.022923876), (0, -4.398909991), (0, -5.25), (-7.25, -5.25), (-7.25, 5.25), (0, 5.25), align=None)
    extrude(amount=BOSS_EXTRUDE7_DEPTH + BOSS_EXTRUDE7_DEPTH_BACK)



with BuildPart() as body_2:
    # Sketch16 → Boss-Extrude8 (new, two sides: drawn at the far end of the back side and taken through both)
    with BuildSketch(Plane.XY.offset(-BOSS_EXTRUDE8_DEPTH_BACK)):
        with Locations((-8.25, 0)):
            Rectangle(SKETCH16_W, SKETCH16_H)
    extrude(amount=BOSS_EXTRUDE8_DEPTH + BOSS_EXTRUDE8_DEPTH_BACK)

    # Sketch17 → Boss-Extrude9 (add)
    with BuildSketch(Plane.XZ.offset(5.25)):
        Polygon((-9.25, 8), (-13.25, 10), (-13.25, 8), (-9.25, 6), align=None)
    extrude(amount=-BOSS_EXTRUDE9_DEPTH)

    # Fillet7
    # the kernel refuses this fillet: 10 mm, written as the material it adds along each edge
    with BuildSketch(Plane(origin=(-9.25, -5.25, 6), x_dir=(0, 0, -1), z_dir=(0, 1, 0))) as fillet7_piece_1:
        with BuildLine():
            CenterArc((6, 10), FILLET7_R, 216.869897646, 53.130102354)
            Line((-2, 4), (-2.16, 3.88))
            ThreePointArc((-2.16, 3.88), (-1.178885438, 1.910557281), (-0.178885438, -0.089442719))
            Line((-0.178885438, -0.089442719), (0, -0.2))
            Line((0, -0.2), (6, -0.2))
            Line((6, -0.2), (6, 0))
        make_face()
    extrude(amount=10.5)


with BuildPart() as part_2:
    add(part_1.part)

    add(body_2.part)  # Boss-Extrude10 merges body 2
    # Sketch18 → Boss-Extrude10 (add)
    with BuildSketch(Plane.XZ.offset(5.25)):
        with Locations((-7.358034117, -1.5)):
            Rectangle(SKETCH18_W, SKETCH18_H)
    extrude(amount=-BOSS_EXTRUDE10_DEPTH)

    # Fillet8
    fillet8_edges = [part_2.edges().sort_by_distance(p)[0] for p in [
        (-7.25, 0, 0),
    ]]
    fillet(fillet8_edges, radius=FILLET8_R)

    # Sketch19 → Boss-Extrude11 (add)
    with BuildSketch(Plane.XZ.offset(5.25)):
        with Locations((-25.75, 9)):
            Rectangle(SKETCH19_W, SKETCH19_H)
    extrude(amount=-BOSS_EXTRUDE11_DEPTH)

    # Sketch20 → Boss-Extrude12 (add)
    with BuildSketch(Plane.XZ.offset(5.25)):
        with Locations((-40.25, 9)):
            Rectangle(SKETCH20_W, SKETCH20_H)
        with Locations(Location((-40.25, 6, 0), (0, 0, 270))):
            Circle(SKETCH20_R, mode=Mode.SUBTRACT)
        with Locations(Location((-40.25, 12, 0), (0, 0, 270))):
            Circle(SKETCH20_R, mode=Mode.SUBTRACT)
    extrude(amount=-BOSS_EXTRUDE12_DEPTH)

    # Fillet9
    fillet9_edges = [part_2.edges().sort_by_distance(p)[0] for p in [
        (-38.25, -2.75, 10),
        (-38.25, -2.75, 8),
    ]]
    fillet(fillet9_edges, radius=FILLET9_R)

    # Fillet10
    fillet10_edges = [part_2.edges().sort_by_distance(p)[0] for p in [
        (-7.25, 0, 8),
    ]]
    fillet(fillet10_edges, radius=FILLET10_R - 0.0001)  # a hair under: the kernel refuses the full size

    # Fillet11
    fillet11_edges = [part_2.edges().sort_by_distance(p)[0] for p in [
        (19.05, 4.447684996, -1.5),
        (19.05, -4.447684996, -1.5),
    ]]
    fillet(fillet11_edges, radius=FILLET11_R - 0.0001)  # a hair under: the kernel refuses the full size


solid = part_2.part
